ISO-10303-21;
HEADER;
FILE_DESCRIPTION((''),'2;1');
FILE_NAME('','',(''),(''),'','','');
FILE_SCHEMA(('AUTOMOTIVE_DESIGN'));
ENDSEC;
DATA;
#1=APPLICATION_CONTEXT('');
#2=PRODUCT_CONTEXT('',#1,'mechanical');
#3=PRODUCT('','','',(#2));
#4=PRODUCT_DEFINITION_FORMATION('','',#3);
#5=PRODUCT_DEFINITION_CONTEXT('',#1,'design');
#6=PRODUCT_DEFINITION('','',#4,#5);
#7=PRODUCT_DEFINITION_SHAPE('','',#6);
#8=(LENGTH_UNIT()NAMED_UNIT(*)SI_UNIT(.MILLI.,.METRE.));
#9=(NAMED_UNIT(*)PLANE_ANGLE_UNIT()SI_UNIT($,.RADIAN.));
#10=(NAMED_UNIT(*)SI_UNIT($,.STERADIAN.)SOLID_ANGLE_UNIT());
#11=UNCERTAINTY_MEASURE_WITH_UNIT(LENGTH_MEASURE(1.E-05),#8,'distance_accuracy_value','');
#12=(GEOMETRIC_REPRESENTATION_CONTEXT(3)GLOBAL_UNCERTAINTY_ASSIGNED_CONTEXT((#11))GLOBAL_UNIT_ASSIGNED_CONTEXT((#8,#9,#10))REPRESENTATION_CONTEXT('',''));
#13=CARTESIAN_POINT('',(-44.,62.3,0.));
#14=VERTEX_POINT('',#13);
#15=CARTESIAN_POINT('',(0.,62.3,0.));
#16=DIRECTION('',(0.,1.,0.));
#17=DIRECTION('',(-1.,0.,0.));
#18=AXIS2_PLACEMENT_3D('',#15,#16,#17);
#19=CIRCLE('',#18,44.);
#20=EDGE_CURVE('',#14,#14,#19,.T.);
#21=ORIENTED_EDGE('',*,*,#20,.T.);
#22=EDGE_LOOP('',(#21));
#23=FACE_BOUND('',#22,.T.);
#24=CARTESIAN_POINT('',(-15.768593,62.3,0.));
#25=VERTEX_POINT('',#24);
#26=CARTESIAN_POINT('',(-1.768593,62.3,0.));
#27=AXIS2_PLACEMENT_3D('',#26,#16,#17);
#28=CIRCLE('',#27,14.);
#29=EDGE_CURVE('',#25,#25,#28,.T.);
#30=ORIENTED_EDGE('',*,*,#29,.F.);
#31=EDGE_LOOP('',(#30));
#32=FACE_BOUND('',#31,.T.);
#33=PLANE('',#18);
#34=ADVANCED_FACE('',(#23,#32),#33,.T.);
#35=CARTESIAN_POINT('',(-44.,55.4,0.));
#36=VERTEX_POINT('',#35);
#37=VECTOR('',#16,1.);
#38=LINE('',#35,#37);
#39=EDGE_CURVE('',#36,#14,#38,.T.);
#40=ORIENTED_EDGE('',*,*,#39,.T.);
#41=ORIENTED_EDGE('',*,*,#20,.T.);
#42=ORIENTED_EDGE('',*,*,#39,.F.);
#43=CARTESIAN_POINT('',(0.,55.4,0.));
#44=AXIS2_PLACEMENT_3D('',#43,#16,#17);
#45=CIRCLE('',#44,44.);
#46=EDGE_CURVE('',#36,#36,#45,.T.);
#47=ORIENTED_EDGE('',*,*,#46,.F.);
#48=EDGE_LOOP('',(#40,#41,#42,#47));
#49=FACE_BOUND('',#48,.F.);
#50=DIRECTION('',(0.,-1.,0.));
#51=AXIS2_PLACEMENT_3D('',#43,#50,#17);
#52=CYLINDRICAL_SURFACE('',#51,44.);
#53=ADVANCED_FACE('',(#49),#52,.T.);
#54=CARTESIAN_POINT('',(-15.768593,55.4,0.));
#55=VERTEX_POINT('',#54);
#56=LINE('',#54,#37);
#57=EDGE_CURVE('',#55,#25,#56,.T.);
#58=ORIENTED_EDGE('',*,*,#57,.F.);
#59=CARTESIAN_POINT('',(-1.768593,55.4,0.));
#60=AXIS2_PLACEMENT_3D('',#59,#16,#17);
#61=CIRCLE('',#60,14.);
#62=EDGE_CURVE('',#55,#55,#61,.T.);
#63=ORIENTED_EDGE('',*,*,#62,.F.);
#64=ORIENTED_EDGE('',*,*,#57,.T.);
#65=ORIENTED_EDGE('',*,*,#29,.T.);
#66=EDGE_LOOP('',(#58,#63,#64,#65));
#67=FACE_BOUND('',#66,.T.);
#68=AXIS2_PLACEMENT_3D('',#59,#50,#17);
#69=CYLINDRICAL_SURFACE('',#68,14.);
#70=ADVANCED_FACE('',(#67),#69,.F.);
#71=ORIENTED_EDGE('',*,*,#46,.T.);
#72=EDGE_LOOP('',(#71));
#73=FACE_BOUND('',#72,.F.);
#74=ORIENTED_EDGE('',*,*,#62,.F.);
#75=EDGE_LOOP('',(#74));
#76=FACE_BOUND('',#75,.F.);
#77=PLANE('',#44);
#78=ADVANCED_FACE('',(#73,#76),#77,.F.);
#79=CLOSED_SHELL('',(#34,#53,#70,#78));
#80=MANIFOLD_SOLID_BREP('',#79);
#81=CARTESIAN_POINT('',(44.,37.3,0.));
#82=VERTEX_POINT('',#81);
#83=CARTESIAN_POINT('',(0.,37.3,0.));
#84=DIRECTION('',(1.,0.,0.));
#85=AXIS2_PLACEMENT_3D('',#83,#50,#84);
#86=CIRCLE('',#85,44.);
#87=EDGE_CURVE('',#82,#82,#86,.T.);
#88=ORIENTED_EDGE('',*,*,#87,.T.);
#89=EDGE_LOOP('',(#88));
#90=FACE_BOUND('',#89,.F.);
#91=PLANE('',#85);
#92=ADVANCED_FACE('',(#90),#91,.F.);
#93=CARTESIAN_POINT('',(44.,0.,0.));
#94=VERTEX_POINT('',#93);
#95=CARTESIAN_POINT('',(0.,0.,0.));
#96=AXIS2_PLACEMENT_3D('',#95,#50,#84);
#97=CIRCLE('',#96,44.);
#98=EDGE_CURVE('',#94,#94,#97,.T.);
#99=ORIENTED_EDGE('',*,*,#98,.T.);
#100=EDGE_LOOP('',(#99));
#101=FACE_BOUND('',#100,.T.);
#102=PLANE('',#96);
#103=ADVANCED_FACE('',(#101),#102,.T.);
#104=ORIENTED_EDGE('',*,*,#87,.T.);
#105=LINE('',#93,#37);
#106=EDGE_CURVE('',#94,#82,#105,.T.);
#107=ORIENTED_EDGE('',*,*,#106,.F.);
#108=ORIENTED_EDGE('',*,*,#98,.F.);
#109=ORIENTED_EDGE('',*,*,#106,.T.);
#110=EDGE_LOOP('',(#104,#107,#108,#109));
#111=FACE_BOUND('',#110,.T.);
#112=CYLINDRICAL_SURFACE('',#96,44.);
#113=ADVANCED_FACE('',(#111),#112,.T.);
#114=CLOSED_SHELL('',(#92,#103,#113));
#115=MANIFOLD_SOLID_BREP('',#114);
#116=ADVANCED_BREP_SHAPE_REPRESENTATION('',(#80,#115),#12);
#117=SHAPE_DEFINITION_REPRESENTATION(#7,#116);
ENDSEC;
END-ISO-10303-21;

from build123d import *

# Parameters (mm, degrees)
F0_R     = 44
F1_DEPTH = 37.3
F5_START = 18.1
F4_R     = 44
F4_R_2   = 14
F5_DEPTH = 6.9


# Not quite as in the source:
# - the program builds the solid bodies; features that only make, move or delete a surface that nothing else refers to are left out


with BuildPart() as f1:
    # F0 (on Front) → F1 (new body)
    with BuildSketch(Plane.XZ):
        Circle(F0_R)
    extrude(amount=-F1_DEPTH)


with BuildPart() as f5:
    # F4 (on face) → F5 (new body)
    with BuildSketch(Plane(origin=(0, 37.3, 0), x_dir=(-1, 0, 0), z_dir=(0, 1, 0)).offset(F5_START)):
        Circle(F4_R)
        with Locations((1.7685926287, 0)):
            Circle(F4_R_2, mode=Mode.SUBTRACT)
    extrude(amount=F5_DEPTH)


solid = Compound([f1.part, f5.part])
